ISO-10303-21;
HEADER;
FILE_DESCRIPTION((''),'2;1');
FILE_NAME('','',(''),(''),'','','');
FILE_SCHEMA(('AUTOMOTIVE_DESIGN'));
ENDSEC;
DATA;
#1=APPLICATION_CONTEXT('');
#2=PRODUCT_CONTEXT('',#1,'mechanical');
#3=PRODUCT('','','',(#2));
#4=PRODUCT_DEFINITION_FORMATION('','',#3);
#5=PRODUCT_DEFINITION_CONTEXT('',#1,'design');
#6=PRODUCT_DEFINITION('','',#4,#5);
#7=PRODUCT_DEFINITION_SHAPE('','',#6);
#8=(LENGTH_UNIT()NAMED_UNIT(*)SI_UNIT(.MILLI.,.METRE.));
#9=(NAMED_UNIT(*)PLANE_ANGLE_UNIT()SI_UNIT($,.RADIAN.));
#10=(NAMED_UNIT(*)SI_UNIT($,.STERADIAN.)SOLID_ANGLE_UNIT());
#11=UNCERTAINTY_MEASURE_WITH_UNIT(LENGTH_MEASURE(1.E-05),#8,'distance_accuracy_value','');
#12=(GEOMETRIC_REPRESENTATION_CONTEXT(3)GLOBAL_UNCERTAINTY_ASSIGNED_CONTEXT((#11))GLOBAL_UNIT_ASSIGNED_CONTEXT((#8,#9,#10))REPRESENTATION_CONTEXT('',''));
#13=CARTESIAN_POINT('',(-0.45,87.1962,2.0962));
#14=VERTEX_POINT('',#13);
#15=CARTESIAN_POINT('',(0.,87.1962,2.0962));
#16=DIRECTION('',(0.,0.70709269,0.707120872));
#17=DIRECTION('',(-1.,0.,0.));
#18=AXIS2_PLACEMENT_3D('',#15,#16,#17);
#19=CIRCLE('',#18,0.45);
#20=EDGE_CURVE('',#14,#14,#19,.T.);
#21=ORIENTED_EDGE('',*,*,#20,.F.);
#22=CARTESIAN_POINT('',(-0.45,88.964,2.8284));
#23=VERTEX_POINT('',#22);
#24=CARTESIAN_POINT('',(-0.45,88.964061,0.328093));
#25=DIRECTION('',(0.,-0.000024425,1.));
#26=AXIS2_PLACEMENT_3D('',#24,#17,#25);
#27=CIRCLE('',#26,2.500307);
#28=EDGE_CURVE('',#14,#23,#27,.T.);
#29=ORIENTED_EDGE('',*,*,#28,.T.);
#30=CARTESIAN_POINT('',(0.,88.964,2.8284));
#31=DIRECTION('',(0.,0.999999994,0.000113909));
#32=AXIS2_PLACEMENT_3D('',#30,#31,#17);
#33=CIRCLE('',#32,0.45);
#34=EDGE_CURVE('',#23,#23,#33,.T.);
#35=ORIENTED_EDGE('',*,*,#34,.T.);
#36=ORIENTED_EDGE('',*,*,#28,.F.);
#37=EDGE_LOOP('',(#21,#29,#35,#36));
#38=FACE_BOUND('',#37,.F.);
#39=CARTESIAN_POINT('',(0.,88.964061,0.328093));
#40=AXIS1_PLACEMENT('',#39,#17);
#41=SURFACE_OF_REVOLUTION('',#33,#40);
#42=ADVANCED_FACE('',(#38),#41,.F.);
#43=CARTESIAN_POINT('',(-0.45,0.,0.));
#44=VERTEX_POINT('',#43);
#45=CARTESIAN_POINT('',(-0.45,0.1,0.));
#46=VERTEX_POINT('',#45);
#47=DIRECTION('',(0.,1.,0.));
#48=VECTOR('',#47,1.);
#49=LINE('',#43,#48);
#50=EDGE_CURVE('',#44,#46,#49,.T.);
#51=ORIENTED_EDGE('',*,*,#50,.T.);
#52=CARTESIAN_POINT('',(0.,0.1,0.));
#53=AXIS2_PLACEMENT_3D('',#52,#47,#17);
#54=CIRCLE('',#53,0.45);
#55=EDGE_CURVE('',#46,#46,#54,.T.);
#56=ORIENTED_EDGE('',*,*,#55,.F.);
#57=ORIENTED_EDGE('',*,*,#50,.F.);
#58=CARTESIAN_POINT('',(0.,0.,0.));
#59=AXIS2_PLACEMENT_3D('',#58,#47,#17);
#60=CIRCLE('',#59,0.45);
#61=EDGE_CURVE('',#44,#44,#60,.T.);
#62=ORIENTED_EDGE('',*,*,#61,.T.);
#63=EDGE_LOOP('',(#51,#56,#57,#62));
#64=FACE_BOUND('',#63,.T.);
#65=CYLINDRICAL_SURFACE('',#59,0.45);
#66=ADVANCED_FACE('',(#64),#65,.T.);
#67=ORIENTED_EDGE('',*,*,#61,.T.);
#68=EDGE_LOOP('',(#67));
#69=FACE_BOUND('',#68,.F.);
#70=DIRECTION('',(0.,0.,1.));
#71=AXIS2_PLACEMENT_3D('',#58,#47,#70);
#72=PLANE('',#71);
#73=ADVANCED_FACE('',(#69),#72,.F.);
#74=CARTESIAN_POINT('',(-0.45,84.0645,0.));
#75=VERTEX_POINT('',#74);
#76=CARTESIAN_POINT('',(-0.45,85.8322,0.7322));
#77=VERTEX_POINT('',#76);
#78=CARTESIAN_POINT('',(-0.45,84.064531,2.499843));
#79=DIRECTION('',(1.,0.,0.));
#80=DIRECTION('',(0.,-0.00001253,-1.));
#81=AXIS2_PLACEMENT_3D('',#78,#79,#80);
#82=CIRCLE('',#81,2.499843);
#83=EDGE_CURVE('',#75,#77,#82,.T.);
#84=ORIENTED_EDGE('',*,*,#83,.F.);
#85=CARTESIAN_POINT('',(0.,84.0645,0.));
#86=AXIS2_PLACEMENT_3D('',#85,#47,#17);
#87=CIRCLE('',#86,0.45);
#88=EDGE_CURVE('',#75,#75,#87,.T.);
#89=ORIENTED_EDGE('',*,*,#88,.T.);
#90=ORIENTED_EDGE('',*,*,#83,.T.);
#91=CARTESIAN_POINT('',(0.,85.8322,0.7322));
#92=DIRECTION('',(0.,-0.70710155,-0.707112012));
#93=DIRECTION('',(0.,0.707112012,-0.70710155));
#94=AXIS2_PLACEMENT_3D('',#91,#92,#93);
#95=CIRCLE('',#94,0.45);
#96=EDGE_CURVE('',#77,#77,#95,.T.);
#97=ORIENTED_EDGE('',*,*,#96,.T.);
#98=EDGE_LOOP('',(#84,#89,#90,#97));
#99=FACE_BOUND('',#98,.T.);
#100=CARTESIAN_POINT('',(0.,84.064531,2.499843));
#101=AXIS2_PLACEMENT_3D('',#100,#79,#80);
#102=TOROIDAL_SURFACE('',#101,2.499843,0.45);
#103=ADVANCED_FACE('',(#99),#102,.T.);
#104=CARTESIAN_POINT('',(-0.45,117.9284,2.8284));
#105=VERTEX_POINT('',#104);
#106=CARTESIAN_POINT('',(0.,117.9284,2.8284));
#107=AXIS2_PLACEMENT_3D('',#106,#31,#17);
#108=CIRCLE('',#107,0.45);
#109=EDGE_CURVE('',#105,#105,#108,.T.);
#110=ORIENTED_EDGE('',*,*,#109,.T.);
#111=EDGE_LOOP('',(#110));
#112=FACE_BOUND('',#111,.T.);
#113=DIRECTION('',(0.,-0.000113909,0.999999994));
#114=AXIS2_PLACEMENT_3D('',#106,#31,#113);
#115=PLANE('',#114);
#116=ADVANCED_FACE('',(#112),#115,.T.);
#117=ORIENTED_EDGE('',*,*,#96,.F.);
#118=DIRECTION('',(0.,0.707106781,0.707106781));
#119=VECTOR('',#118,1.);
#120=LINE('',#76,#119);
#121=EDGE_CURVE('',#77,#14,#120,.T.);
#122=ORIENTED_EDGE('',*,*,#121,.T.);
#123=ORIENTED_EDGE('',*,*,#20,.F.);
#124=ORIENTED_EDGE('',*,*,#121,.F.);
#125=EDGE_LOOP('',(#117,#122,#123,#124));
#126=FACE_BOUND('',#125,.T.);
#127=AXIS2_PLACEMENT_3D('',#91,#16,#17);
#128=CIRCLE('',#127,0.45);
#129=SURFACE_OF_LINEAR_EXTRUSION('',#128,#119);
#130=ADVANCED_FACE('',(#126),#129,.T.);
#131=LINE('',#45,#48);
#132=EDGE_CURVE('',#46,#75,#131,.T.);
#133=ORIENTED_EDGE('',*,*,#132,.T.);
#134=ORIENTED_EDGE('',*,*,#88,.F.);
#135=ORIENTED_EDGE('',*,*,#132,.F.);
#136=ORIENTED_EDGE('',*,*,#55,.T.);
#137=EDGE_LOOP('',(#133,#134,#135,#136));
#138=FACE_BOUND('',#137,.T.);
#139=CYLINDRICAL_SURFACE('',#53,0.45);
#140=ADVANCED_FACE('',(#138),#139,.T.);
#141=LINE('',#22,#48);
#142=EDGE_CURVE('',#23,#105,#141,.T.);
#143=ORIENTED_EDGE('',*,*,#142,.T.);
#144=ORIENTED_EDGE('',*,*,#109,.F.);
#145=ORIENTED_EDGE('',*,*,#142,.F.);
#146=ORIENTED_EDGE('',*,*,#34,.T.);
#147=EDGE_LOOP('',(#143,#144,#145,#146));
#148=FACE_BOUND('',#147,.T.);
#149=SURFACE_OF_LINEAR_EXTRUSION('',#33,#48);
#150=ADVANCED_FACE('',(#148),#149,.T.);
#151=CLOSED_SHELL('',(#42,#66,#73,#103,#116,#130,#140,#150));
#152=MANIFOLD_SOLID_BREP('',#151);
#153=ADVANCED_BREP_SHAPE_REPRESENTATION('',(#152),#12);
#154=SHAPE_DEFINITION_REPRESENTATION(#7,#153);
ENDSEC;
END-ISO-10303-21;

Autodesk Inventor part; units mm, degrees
ref_plane "YZ Plane" through (0, 0, 0) normal (1, 0, 0) x (0, 1, 0)
ref_plane "XZ Plane" through (0, 0, 0) normal (0, 1, 0) x (-1, 0, 0)
ref_plane "XY Plane" through (0, 0, 0) normal (0, 0, 1) x (1, 0, 0)
sketch "Sketch1" plane through (0, 0, 0) normal (0, 1, 0) x (-1, 0, 0)
  circle A0 centre (0, 0) radius 0.45
  dimension "d0" = 0.9
sketch "Sketch2" plane through (0, 0, 0) normal (1, 0, 0) x (0, 1, 0)
  line L0 (0, 0) -> (0.1, 0)
  line L1 (0.1, 0) -> (84.0645, 0)
  line L2 (85.8322, 0.7322) -> (87.1962, 2.0962)
  line L3 (88.964, 2.8284) -> (117.9284, 2.8284)
  arc A0 (88.964, 2.8284) -> (87.1962, 2.0962) centre (88.964, 0.3284) ccw
  arc A1 (84.0645, 0) -> (85.8322, 0.7322) centre (84.0645, 2.5) ccw
  point P0 (85.1, 0)
  point P1 (87.9284, 2.8284)
  dimension "d1" = 0.1
  dimension "d4" = 85
  dimension "d6" = 4
  dimension "d7" = 30
  dimension "d8" = 2.5
sweep "Sweep2" add profiles "Sketch1" path "Sketch2"
properties part number "cable anular"
